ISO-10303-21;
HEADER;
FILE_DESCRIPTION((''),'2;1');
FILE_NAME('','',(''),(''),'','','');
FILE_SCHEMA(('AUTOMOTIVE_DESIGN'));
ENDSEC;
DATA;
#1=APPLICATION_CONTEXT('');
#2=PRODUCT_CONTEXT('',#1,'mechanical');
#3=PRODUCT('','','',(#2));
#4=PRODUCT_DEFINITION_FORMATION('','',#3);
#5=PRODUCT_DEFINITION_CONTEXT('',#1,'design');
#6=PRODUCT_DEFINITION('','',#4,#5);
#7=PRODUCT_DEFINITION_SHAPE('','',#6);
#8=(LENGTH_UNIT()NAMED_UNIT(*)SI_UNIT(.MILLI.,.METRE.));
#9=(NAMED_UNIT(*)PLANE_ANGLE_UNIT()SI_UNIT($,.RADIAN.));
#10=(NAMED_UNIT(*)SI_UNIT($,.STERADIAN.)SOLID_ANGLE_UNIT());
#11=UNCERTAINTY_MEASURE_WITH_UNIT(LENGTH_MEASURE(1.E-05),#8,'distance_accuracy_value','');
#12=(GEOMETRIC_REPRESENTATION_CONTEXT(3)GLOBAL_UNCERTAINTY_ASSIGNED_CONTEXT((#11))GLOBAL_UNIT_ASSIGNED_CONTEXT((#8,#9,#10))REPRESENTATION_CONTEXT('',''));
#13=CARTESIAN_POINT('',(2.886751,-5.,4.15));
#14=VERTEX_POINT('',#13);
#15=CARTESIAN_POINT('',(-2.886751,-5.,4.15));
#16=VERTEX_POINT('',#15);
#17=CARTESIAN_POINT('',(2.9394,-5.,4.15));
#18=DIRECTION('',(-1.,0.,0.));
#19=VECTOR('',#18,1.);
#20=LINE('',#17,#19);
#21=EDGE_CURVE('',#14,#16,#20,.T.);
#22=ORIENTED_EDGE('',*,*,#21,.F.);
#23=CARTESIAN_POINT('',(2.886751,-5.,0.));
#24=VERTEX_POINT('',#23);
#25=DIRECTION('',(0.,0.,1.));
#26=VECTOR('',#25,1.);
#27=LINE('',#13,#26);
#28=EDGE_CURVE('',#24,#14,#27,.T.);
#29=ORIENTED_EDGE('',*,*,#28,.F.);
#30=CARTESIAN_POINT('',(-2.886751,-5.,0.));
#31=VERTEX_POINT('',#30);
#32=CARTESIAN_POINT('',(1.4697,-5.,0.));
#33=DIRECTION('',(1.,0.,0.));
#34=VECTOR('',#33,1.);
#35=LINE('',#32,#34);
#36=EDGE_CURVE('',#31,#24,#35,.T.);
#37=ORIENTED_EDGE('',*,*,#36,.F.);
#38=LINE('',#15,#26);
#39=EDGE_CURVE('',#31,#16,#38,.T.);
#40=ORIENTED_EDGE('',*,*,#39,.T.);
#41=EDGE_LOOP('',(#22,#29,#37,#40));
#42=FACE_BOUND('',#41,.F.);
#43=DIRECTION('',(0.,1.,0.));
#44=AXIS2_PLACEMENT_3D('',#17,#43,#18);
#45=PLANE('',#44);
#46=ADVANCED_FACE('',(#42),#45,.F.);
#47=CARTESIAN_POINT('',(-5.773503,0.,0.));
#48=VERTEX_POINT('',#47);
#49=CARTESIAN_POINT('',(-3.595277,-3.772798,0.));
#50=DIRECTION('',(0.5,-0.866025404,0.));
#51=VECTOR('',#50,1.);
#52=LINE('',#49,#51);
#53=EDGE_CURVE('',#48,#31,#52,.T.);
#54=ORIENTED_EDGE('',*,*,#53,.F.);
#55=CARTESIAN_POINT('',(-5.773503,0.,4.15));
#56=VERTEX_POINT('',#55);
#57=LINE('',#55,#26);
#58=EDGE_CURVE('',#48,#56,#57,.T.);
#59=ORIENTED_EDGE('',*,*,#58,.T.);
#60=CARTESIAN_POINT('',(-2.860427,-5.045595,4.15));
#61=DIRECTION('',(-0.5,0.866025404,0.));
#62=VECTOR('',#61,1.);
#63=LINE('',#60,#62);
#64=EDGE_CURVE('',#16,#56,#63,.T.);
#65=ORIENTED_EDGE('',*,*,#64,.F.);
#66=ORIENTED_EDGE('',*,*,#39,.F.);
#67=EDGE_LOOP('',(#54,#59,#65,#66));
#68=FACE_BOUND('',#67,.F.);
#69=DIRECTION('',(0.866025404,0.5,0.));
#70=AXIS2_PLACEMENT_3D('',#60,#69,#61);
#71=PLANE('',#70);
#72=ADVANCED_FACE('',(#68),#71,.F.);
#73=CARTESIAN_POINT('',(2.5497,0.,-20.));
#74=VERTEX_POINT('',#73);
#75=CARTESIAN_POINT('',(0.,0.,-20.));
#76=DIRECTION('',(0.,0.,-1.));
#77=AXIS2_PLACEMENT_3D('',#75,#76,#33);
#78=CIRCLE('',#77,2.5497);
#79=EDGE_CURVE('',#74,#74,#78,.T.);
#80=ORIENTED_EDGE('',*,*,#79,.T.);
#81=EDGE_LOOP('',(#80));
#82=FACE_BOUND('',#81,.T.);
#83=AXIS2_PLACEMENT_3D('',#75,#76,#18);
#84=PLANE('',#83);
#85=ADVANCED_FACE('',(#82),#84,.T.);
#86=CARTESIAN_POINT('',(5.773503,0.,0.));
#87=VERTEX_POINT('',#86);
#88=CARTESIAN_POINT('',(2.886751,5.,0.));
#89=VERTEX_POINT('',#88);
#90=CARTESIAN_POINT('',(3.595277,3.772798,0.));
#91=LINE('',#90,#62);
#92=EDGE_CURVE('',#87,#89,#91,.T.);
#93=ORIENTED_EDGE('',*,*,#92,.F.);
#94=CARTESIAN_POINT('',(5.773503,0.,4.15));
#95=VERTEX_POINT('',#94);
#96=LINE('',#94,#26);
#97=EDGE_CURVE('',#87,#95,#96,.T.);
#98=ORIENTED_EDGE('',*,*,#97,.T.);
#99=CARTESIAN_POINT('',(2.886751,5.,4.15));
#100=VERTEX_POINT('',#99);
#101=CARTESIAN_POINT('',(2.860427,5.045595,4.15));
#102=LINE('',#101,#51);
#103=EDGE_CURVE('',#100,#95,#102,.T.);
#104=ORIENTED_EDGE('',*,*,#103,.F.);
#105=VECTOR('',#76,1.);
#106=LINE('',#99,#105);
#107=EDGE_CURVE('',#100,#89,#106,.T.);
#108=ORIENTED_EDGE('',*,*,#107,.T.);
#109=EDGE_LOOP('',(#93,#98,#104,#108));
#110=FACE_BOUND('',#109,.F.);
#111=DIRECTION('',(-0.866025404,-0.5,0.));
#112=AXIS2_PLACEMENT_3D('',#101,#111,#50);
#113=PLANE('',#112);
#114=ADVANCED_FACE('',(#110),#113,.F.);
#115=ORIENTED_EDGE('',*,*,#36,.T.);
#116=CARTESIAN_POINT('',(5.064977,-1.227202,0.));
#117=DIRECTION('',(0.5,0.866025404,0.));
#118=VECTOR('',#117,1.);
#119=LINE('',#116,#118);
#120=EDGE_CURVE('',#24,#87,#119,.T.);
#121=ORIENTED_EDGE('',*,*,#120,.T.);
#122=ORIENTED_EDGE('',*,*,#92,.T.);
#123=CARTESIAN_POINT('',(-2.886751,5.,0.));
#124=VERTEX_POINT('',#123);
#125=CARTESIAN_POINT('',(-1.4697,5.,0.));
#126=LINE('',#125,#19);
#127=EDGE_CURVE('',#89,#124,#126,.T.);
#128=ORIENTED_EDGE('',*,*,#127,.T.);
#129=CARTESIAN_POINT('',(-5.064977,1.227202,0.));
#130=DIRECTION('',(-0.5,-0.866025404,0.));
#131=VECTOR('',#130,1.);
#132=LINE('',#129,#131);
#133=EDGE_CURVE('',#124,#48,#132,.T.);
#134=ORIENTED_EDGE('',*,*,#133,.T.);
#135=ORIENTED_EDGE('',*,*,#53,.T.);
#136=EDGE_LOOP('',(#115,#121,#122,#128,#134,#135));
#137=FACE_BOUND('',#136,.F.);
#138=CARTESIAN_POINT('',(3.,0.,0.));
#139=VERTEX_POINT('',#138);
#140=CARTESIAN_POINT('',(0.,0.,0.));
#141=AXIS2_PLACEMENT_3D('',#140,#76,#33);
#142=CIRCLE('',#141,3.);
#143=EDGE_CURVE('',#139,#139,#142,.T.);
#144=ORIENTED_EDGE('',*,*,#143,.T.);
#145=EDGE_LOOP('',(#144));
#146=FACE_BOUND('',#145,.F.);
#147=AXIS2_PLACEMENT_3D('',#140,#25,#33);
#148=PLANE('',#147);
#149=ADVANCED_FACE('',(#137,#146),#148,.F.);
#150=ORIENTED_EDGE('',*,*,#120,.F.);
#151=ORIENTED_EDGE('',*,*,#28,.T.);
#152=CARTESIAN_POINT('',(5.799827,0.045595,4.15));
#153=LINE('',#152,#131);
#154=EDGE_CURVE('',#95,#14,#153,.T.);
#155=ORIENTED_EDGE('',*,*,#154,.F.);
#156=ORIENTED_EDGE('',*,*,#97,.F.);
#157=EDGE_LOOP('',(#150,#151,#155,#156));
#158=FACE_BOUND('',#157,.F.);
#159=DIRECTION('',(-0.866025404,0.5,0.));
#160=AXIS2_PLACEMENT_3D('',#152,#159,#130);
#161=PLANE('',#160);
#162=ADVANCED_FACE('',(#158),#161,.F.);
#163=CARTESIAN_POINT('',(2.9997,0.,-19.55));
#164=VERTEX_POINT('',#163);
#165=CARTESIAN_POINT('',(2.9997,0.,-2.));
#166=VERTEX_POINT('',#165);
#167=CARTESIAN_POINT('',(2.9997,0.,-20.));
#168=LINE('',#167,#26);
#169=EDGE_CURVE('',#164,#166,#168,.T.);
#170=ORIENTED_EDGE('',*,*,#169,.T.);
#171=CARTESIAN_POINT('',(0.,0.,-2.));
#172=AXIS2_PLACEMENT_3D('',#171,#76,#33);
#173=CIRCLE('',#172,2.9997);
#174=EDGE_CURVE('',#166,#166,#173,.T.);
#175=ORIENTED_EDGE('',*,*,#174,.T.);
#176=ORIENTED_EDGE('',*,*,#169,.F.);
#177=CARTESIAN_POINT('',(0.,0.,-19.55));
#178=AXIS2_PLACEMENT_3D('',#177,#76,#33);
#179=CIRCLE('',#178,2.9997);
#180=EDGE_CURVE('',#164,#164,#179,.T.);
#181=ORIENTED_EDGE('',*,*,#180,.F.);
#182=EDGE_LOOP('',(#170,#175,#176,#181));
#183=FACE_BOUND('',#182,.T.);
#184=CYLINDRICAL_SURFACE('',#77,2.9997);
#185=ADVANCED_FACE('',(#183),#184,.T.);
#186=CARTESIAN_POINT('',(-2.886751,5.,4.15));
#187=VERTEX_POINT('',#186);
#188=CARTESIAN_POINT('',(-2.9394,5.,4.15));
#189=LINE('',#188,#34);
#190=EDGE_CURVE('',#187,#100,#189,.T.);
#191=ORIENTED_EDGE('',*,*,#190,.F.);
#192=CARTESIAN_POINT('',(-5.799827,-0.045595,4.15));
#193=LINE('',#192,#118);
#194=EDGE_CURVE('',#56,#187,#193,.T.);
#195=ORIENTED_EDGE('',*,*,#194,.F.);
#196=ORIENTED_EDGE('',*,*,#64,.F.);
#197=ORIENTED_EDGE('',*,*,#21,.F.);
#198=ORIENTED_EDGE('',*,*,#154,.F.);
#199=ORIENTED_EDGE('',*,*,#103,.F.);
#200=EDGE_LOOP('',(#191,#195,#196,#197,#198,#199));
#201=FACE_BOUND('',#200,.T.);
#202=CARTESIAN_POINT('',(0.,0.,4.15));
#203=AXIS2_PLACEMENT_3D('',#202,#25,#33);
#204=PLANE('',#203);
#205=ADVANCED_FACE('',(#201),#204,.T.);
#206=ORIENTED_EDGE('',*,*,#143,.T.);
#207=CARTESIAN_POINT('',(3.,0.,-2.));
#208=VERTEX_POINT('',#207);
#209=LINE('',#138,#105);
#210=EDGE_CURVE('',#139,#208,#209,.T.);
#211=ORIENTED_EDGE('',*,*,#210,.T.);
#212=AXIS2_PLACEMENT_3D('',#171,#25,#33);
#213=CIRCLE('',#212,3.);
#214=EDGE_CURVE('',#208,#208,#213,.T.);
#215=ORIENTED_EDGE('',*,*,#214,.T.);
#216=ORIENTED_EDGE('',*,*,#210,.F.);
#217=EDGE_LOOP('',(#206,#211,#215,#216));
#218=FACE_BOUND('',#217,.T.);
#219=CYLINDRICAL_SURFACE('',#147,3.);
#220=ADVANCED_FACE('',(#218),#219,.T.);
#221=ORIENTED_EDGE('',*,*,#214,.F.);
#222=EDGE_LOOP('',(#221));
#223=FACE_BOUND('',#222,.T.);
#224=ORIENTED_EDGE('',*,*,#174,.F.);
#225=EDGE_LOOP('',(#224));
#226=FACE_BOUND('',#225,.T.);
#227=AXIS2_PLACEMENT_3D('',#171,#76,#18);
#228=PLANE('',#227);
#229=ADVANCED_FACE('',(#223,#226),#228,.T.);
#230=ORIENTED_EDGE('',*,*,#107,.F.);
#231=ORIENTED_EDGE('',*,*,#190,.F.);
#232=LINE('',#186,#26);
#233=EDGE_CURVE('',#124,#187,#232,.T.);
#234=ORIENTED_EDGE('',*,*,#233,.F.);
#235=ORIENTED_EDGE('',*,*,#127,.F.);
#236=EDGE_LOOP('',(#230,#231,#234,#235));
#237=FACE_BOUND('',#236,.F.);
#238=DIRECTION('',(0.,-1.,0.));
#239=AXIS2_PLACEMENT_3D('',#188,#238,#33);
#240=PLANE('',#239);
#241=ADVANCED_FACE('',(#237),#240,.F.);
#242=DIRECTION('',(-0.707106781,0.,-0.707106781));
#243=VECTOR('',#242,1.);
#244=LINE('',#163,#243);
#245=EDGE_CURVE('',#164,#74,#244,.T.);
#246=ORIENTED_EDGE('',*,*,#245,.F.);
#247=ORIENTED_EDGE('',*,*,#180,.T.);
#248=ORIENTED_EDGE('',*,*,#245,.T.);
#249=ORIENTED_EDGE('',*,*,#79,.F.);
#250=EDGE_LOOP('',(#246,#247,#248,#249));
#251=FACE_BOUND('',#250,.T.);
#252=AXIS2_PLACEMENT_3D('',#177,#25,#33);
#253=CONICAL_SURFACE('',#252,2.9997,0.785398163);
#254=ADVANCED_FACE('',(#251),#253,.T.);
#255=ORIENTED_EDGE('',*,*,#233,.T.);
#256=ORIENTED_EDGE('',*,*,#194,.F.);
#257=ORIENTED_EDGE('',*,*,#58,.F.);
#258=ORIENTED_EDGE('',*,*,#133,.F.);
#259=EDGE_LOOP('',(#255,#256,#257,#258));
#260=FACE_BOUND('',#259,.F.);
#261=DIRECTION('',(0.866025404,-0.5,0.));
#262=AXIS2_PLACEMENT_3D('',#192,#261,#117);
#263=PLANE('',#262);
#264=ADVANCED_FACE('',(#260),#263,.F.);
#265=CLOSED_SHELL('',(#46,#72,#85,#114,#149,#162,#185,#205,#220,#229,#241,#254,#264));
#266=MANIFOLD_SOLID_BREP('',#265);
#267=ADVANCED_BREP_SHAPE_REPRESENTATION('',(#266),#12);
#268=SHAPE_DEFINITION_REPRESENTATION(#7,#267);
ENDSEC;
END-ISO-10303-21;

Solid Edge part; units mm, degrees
sketch "Sketch1" plane through (0, 0, 0) normal (0, 0, 1) x (1, 0, 0)
  circle A0 centre (0, 0) radius 5.8
  dimension "D1" = 11.6
extrude "Protrusion1" add sketch "Sketch1" along normal blind 4.15
sketch "Sketch2" plane through (0, 0, 0) normal (0, 0, -1) x (1, 0, 0)
  circle A0 centre (0, 0) radius 3
extrude "Protrusion2" add sketch "Sketch2" along normal blind 20
sketch "Sketch3" plane through (0, 0, -20) normal (0, 0, -1) x (1, 0, 0)
  circle A0 centre (0, 0) radius 2.9997
extrude "Cutout1" cut sketch "Sketch3" against normal blind 18 flip side to cut
chamfer "Chamfer_1" distance 0.45 angle 45 1 edges at (-2.9997, 0, -20)
sketch "Sketch4" plane through (0, 0, 4.15) normal (0, 0, 1) x (1, 0, 0)
  line L0 (-2.9394, 5) -> (2.9394, 5)
  dimension "D1" = 10
extrude "Cutout2" cut sketch "Sketch4" against normal up to next material side at (0, 5.05, 4.15)
pattern_circular "Pattern1" count 6 over 360 about axis through (0, 0, 4.15) along (0, 0, 1) of "Cutout2"
properties part number "24103215"
